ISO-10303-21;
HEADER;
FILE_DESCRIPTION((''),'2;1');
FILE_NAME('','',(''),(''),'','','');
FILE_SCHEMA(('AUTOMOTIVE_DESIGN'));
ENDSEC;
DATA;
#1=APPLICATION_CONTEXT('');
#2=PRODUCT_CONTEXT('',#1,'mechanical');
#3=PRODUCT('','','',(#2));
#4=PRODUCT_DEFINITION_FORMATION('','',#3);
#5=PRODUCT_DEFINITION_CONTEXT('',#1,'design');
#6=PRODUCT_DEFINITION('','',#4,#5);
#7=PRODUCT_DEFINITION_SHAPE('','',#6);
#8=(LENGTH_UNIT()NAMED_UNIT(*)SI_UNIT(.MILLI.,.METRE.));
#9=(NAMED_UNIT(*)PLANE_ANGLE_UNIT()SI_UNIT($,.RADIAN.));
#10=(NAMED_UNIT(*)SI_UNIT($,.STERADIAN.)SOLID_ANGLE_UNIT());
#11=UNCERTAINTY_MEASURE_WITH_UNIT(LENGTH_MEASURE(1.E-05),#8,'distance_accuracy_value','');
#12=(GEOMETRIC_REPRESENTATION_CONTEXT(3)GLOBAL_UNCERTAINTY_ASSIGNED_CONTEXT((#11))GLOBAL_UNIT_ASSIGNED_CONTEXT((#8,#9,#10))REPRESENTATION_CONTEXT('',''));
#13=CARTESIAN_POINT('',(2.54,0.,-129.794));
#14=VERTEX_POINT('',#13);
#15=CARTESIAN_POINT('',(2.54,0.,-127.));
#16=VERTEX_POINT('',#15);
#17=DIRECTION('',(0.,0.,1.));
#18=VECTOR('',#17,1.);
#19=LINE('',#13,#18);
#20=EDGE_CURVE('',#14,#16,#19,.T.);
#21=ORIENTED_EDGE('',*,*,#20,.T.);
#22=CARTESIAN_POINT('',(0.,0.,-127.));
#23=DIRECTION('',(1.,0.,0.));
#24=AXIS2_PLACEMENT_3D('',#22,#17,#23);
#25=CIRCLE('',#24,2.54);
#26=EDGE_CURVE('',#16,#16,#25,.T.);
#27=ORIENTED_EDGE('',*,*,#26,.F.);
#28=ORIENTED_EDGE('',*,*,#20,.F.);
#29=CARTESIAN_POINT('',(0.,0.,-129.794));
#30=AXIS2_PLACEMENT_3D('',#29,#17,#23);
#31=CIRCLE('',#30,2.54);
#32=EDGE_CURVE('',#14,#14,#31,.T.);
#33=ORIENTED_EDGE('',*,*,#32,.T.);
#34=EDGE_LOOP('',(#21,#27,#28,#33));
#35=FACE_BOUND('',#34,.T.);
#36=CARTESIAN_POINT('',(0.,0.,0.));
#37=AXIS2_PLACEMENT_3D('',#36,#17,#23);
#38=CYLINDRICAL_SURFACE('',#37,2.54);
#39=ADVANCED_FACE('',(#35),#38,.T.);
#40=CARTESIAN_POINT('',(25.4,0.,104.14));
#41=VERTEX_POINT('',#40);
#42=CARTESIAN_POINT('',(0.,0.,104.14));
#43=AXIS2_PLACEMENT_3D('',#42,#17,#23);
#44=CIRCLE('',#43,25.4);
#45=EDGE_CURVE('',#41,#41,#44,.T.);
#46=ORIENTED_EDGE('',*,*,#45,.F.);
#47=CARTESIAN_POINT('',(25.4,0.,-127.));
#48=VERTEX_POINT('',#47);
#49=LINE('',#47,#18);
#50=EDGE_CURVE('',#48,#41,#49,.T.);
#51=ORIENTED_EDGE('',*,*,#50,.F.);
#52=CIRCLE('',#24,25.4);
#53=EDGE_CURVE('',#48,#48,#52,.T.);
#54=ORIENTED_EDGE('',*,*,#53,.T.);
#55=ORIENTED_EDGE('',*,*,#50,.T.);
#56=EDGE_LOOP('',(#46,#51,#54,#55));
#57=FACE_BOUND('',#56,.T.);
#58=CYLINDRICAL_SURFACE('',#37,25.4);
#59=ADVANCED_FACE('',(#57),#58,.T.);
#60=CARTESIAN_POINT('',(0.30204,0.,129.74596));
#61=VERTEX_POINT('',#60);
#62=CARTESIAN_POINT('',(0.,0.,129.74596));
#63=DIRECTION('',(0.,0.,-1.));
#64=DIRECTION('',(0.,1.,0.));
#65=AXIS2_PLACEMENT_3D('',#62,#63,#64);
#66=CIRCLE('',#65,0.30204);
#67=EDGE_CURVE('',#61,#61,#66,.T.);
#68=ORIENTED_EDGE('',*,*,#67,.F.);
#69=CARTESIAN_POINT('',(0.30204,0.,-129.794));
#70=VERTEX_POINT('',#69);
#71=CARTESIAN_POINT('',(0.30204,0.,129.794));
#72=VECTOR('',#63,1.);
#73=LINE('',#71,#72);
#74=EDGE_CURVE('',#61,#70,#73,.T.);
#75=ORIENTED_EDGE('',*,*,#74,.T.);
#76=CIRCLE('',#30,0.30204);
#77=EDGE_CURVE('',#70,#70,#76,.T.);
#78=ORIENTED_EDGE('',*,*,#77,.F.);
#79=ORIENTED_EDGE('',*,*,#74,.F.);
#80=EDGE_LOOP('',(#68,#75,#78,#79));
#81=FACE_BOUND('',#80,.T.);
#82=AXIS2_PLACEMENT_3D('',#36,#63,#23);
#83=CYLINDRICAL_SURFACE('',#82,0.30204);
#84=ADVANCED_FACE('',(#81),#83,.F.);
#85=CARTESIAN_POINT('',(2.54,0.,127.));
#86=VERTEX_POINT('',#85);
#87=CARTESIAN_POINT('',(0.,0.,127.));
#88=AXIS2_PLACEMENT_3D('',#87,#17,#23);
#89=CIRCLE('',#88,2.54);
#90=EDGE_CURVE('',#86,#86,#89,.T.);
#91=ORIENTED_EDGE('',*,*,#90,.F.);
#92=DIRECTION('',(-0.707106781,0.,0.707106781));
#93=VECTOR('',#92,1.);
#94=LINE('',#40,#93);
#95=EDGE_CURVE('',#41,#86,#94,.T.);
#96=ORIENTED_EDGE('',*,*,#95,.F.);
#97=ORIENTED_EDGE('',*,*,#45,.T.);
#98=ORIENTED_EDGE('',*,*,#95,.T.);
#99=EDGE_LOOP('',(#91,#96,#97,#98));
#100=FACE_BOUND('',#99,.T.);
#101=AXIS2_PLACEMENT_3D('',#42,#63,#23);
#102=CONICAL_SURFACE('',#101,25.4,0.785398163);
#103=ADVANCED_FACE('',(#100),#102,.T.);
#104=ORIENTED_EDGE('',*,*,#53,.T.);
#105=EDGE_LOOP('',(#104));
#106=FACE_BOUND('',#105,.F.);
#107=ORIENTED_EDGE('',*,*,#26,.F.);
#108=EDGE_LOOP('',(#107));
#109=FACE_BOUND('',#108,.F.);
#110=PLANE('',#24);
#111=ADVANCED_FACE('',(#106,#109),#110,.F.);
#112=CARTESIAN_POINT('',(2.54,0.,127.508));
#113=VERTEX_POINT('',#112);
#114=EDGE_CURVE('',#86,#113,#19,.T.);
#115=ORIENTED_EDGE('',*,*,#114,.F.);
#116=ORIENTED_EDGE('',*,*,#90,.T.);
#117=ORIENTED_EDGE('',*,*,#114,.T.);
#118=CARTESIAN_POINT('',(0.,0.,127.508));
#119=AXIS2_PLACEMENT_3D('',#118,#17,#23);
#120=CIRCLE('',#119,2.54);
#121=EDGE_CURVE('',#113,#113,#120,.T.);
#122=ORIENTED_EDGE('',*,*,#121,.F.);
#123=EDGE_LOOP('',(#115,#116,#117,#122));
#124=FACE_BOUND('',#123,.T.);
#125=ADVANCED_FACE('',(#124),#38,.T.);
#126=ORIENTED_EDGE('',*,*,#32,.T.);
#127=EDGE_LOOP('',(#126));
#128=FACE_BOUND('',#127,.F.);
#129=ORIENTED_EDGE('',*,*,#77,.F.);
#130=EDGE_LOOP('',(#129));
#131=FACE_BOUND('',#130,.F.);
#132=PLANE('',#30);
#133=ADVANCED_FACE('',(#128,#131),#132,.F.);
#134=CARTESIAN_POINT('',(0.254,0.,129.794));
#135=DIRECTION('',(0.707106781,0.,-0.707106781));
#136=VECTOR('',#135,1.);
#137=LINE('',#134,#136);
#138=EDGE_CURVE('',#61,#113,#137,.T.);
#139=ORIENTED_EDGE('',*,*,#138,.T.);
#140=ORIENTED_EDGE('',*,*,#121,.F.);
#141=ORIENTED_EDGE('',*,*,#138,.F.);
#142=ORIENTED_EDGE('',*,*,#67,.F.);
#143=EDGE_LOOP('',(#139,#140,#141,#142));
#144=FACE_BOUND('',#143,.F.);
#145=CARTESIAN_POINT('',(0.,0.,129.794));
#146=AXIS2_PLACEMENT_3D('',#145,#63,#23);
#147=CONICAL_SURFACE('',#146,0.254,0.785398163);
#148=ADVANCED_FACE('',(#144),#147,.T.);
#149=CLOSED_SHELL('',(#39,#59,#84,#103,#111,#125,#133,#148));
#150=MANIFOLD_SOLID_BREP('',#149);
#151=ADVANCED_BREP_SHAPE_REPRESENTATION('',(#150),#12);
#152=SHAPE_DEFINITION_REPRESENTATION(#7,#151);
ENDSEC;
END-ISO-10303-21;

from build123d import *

# Parameters (mm, degrees)
F0_R     = 25.4
F1_DEPTH = 127
F2_SIZE  = 22.86
F4_DEPTH = 254.001
F5_R     = 2.54
F5_R_2   = 0.3020400554
F6_DEPTH = 129.794


# Not quite as in the source:
# - a fillet or chamfer that OpenCascade refuses, or shapes differently, is made with other operations: its cross-section is extruded or revolved along the edge and cut away or added


with BuildPart() as f1:
    # F0 (on Top) → F1 (new body, symmetric)
    with BuildSketch(Plane.XY):
        Circle(F0_R)
    extrude(amount=F1_DEPTH, both=True)

    # F2
    f2_edges = [f1.edges().sort_by_distance(p)[0] for p in [
        (-25.4, 0, 127),
    ]]
    chamfer(f2_edges, length=F2_SIZE)

    # F4 (cut, through all): a face of the model
    f4_faces = [f1.faces().sort_by_distance(p)[0] for p in [
        (0, 0, 127),
    ]]
    extrude(f4_faces, amount=-F4_DEPTH, mode=Mode.SUBTRACT)

    # F5 (on Top) → F6 (join, symmetric)
    with BuildSketch(Plane.XY):
        Circle(F5_R)
        Circle(F5_R_2, mode=Mode.SUBTRACT)
    extrude(amount=F6_DEPTH, both=True)

    # F7: chamfer of 2.286 on 1 edges, made by hand

    # F7_s1 → F7_t2 (revolve, cut)
    with BuildSketch(Plane.XZ):
        Polygon((0.254, 129.794), (2.54, 127.508), (2.54, 129.794), align=None)
    revolve(axis=Axis((0, 0, 129.794), (0, 0, 1)), mode=Mode.SUBTRACT)


solid = f1.part
